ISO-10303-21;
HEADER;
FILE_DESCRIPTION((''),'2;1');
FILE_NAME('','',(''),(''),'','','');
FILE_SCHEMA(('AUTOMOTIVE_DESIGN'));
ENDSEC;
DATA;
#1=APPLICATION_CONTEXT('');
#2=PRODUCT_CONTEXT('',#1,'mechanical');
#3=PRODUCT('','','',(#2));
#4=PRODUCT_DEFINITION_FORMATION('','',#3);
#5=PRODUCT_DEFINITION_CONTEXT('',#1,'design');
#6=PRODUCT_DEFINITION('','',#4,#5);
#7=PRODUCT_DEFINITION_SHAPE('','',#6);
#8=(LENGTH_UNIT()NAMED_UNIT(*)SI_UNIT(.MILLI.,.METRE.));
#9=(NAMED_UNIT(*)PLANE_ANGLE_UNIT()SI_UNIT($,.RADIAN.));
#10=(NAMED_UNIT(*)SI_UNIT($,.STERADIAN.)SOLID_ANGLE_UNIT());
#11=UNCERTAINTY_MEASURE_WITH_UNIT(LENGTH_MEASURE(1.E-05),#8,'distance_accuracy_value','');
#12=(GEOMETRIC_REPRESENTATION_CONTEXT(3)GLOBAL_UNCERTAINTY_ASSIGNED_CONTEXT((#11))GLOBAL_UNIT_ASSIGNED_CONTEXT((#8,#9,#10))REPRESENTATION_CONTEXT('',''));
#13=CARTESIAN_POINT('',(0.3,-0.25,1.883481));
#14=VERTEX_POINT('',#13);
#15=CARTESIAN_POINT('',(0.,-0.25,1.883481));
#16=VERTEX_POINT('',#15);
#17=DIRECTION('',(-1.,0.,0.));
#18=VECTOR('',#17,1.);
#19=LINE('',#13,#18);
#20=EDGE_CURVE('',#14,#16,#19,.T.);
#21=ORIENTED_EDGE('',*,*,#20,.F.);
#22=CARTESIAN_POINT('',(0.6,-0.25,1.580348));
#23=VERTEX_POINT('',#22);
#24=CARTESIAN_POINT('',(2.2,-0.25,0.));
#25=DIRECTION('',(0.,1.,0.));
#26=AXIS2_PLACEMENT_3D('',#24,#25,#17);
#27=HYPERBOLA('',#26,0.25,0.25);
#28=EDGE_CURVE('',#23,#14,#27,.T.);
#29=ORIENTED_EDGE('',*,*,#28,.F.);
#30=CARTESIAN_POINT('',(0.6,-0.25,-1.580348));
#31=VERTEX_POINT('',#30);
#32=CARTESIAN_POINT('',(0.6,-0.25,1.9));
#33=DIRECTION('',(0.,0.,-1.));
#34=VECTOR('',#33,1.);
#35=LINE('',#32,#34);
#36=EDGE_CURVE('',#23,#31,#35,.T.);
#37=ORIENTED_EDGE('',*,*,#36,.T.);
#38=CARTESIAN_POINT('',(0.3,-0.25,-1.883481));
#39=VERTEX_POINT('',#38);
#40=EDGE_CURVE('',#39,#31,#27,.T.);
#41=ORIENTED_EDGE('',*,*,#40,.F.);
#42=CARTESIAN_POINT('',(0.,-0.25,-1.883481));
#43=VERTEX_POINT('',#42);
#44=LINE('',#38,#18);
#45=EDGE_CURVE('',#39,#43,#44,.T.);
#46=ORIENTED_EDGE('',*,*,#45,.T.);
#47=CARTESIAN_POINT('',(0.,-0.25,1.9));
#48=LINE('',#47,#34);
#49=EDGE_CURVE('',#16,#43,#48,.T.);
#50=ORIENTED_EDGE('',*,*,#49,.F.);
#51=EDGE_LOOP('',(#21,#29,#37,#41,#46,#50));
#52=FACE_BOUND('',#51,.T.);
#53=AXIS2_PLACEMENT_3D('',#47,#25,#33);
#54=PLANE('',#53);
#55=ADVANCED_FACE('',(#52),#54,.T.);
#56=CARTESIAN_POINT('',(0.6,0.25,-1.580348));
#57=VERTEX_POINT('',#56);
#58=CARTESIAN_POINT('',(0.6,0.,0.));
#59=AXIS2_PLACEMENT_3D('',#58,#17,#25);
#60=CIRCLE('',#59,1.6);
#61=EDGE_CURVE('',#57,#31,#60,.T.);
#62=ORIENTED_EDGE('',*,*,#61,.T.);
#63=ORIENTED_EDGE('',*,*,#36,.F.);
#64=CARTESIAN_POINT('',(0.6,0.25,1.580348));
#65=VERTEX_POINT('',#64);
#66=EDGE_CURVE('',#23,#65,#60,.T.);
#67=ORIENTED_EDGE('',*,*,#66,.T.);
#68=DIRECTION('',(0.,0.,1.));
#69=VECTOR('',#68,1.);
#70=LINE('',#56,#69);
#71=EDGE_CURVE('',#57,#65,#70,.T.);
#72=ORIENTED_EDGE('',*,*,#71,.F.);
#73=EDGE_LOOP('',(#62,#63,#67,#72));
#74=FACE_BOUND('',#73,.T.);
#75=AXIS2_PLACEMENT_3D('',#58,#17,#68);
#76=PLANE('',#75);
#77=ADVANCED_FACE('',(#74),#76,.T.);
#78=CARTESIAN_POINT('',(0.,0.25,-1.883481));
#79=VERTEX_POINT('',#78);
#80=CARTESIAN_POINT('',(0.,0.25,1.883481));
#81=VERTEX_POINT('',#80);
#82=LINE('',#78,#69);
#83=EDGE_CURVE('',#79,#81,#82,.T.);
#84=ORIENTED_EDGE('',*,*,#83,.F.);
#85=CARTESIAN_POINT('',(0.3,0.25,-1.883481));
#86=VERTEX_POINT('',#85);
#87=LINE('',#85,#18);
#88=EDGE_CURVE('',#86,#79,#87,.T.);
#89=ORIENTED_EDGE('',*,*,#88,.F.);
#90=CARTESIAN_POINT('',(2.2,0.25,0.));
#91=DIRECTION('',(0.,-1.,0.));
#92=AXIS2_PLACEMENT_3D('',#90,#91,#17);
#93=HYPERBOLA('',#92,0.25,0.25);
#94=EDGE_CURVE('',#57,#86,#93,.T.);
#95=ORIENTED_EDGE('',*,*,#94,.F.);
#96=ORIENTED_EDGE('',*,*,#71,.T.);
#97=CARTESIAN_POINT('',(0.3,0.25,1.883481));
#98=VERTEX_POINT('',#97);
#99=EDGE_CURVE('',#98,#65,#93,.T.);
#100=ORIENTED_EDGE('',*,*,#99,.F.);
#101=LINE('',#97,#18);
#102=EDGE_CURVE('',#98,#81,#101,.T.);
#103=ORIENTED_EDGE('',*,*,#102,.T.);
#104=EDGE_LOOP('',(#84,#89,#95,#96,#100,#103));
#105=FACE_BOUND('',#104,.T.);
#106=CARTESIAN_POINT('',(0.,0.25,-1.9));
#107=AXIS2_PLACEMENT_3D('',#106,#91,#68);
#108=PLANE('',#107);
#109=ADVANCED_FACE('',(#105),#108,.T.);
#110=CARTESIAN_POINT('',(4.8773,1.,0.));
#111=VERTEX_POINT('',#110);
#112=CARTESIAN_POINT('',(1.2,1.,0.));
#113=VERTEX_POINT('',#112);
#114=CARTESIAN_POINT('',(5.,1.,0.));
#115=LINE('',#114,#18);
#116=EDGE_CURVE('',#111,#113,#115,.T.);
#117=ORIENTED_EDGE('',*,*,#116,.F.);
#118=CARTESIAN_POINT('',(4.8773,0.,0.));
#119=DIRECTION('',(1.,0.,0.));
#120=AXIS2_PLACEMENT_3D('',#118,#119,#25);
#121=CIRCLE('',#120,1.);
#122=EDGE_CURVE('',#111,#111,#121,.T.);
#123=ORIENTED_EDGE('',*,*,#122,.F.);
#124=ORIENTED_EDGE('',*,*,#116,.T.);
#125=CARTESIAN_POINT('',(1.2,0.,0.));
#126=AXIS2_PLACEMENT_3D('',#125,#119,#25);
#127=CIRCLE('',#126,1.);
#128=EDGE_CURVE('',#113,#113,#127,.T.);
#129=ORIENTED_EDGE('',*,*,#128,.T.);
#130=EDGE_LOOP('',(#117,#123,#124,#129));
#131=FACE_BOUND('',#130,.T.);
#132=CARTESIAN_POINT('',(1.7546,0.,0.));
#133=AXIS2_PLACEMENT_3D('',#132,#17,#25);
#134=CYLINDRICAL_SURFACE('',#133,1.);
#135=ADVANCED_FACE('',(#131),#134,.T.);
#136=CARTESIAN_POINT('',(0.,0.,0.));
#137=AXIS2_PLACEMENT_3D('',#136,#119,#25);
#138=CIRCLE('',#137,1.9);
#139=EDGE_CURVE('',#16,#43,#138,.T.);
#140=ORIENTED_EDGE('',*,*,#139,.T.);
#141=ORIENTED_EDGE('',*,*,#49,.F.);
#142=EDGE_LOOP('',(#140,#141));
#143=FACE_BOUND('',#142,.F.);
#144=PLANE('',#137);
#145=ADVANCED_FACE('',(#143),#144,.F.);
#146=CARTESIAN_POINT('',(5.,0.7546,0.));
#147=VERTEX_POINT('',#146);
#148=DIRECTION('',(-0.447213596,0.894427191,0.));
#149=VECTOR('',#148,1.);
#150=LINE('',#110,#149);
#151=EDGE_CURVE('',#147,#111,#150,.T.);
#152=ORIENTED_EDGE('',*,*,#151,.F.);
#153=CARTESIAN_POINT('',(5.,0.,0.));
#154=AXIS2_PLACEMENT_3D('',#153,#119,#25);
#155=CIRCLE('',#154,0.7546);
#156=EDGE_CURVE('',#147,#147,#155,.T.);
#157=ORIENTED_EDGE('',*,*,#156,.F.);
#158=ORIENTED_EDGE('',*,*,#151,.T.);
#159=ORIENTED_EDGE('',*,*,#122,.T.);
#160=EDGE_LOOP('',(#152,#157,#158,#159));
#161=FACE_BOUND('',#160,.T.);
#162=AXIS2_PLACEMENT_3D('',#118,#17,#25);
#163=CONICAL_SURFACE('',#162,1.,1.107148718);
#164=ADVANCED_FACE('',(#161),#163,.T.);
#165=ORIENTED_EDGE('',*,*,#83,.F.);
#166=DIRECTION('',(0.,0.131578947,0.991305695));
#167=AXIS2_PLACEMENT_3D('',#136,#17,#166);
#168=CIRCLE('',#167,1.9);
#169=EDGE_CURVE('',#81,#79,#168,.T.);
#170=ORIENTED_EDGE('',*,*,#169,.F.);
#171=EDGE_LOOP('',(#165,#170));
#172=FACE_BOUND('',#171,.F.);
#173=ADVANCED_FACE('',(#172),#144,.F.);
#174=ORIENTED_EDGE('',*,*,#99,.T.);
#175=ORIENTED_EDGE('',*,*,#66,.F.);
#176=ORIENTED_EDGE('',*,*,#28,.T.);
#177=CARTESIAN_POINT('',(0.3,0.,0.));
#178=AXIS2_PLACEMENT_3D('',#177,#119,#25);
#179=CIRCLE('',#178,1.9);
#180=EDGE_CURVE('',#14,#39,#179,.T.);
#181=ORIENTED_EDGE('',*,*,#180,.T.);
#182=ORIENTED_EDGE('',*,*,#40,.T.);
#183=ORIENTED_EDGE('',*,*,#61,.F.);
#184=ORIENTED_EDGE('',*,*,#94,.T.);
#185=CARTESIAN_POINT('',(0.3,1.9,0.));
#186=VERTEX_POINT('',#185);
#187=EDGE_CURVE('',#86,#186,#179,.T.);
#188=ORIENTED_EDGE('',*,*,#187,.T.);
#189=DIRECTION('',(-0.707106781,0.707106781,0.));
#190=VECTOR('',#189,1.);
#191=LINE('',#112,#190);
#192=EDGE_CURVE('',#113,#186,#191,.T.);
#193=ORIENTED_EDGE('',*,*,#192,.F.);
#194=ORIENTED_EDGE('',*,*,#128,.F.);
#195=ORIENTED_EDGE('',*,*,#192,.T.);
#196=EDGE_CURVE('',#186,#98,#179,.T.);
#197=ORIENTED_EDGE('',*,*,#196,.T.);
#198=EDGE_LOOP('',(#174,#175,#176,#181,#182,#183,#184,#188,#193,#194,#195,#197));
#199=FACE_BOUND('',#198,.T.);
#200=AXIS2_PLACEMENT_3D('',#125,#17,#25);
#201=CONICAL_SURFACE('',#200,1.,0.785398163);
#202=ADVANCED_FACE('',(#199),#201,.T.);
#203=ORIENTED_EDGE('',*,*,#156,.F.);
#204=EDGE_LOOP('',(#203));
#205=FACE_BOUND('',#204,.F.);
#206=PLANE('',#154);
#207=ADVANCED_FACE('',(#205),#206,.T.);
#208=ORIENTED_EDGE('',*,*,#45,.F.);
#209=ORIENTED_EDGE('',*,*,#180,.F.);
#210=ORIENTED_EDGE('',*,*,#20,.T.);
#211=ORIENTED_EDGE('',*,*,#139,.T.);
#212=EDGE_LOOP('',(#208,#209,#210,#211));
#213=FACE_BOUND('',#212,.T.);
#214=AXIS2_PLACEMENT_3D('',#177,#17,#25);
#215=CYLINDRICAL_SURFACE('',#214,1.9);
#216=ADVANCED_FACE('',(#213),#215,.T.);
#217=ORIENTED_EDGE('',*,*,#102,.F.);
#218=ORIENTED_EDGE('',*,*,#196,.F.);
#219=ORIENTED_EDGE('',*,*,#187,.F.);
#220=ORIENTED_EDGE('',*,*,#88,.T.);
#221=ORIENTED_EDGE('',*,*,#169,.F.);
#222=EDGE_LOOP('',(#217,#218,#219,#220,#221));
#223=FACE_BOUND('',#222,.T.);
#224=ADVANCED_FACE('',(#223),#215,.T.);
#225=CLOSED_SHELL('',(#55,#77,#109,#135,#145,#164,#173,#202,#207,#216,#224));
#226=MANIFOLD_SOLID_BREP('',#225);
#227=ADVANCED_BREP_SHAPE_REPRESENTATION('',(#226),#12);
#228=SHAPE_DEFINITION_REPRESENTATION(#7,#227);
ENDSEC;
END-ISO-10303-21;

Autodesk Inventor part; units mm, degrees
ref_plane "YZ Plane" through (0, 0, 0) normal (1, 0, 0) x (0, 1, 0)
ref_plane "XZ Plane" through (0, 0, 0) normal (0, 1, 0) x (-1, 0, 0)
sketch "Sketch1" plane through (0, 0, 0) normal (0, 0, 1) x (1, 0, 0)
  line L0 (0, 0) -> (5, 0)
  line L1 (5, 0) -> (5, 1)
  line L2 (5, 1) -> (2, 1)
  line L3 (2, 1) -> (1.7546, 1)
  line L4 (1.7546, 1) -> (1.2, 1)
  line L5 (1.2, 1) -> (0.3, 1.9)
  line L6 (0.3, 1.9) -> (0, 1.9)
  line L7 (0, 1.9) -> (0, 0)
  line L8 (2, 1) -> (1.2, 1) construction
  line L9 (-1, 0) -> (6, 0) projected
  line L10 (0, 2.28) -> (0, -0.38) projected
  dimension "d0" = 5
  dimension "d1" = 45
  dimension "d2" = 0.2454
  dimension "d3" = 3
  dimension "d4" = 1.2
  dimension "d5" = 2
  dimension "d6" = 2
  dimension "d7" = 3.8
revolve "Body" add sketch "Sketch1" angle 360 about axis through (0, 0, 0) along (1, 0, 0)
sketch "Sketch2" plane through (0, 0, 0) normal (-1, 0, 0) x (0, 0, 1)
  line L0 (1.9, -0.25) -> (-1.9, -0.25)
  line L1 (-1.9, -0.25) -> (-1.9, 0.25)
  line L2 (-1.9, 0.25) -> (1.9, 0.25)
  line L3 (1.9, 0.25) -> (1.9, -0.25)
  line L4 (0, 0.25) -> (0, -0.25) construction
  line L5 (-1.9, 0) -> (1.9, 0) construction
  line L6 (0, 1.9) -> (0, 0) projected
  dimension "d15" = 0.5
  dimension "d16" = 3.8
extrude "Slot" cut sketch "Sketch2" against normal blind 0.6
thread "Thread" size "M2x0.4" class "6g" standard "ISO Metric profile" length 3
chamfer "Chamfer1" distance 0.2454 distance2 0.1227 1 edges at (5, -1, 0) measured on face at (5, -0.0858, 0.7069)
ref_plane "Work Plane1" through (33.575, 0, 0) normal (0, 0, -1) x (1, 0, 0)
equation "\"d0\" = NLG"
equation "\"d1\" = 0.5 * SEWI"
equation "\"d2\" = GAL"
equation "\"d3\" = GEL"
equation "\"d4\" = KOH"
equation "\"d5\" = BDM"
equation "\"d6\" = GD"
equation "\"d7\" = KOD"
equation "\"d15\" = SBR"
equation "\"d16\" = KOD"
equation "\"d8\" = STI"
equation "\"d10\" = GEL"
equation "\"d12\" = -0.5 * SPD + 0.5 * GD"
equation "\"d13\" = 0.5 * GAL"
equation "\"NLG\" = 5"
equation "\"GAL\" = 0.61345 * PTC"
equation "\"GEL\" = 3"
equation "\"KOH\" = 1.2"
equation "\"KOD\" = 3.8"
equation "\"SEWI\" = 90deg"
equation "\"BDM\" = NND"
equation "\"GD\" = NND"
equation "\"SBR\" = 0.5"
equation "\"STI\" = 0.6"
equation "\"SPD\" = NND - 1.2269 * PTC"
equation "\"GUL\" = 0.61345 * PTC"
equation "\"PTC\" = 0.4"
equation "\"EPV\" = 2.2"
equation "\"THREADDIA\" = 2"
equation "\"TOA\" = 30deg"
equation "\"NND\" = 2"
equation "\"GD1\" = THREADDIA - 1.2269 * PTC"
properties part number "DIN 963 - M2 x 5" material "Steel, Mild"
